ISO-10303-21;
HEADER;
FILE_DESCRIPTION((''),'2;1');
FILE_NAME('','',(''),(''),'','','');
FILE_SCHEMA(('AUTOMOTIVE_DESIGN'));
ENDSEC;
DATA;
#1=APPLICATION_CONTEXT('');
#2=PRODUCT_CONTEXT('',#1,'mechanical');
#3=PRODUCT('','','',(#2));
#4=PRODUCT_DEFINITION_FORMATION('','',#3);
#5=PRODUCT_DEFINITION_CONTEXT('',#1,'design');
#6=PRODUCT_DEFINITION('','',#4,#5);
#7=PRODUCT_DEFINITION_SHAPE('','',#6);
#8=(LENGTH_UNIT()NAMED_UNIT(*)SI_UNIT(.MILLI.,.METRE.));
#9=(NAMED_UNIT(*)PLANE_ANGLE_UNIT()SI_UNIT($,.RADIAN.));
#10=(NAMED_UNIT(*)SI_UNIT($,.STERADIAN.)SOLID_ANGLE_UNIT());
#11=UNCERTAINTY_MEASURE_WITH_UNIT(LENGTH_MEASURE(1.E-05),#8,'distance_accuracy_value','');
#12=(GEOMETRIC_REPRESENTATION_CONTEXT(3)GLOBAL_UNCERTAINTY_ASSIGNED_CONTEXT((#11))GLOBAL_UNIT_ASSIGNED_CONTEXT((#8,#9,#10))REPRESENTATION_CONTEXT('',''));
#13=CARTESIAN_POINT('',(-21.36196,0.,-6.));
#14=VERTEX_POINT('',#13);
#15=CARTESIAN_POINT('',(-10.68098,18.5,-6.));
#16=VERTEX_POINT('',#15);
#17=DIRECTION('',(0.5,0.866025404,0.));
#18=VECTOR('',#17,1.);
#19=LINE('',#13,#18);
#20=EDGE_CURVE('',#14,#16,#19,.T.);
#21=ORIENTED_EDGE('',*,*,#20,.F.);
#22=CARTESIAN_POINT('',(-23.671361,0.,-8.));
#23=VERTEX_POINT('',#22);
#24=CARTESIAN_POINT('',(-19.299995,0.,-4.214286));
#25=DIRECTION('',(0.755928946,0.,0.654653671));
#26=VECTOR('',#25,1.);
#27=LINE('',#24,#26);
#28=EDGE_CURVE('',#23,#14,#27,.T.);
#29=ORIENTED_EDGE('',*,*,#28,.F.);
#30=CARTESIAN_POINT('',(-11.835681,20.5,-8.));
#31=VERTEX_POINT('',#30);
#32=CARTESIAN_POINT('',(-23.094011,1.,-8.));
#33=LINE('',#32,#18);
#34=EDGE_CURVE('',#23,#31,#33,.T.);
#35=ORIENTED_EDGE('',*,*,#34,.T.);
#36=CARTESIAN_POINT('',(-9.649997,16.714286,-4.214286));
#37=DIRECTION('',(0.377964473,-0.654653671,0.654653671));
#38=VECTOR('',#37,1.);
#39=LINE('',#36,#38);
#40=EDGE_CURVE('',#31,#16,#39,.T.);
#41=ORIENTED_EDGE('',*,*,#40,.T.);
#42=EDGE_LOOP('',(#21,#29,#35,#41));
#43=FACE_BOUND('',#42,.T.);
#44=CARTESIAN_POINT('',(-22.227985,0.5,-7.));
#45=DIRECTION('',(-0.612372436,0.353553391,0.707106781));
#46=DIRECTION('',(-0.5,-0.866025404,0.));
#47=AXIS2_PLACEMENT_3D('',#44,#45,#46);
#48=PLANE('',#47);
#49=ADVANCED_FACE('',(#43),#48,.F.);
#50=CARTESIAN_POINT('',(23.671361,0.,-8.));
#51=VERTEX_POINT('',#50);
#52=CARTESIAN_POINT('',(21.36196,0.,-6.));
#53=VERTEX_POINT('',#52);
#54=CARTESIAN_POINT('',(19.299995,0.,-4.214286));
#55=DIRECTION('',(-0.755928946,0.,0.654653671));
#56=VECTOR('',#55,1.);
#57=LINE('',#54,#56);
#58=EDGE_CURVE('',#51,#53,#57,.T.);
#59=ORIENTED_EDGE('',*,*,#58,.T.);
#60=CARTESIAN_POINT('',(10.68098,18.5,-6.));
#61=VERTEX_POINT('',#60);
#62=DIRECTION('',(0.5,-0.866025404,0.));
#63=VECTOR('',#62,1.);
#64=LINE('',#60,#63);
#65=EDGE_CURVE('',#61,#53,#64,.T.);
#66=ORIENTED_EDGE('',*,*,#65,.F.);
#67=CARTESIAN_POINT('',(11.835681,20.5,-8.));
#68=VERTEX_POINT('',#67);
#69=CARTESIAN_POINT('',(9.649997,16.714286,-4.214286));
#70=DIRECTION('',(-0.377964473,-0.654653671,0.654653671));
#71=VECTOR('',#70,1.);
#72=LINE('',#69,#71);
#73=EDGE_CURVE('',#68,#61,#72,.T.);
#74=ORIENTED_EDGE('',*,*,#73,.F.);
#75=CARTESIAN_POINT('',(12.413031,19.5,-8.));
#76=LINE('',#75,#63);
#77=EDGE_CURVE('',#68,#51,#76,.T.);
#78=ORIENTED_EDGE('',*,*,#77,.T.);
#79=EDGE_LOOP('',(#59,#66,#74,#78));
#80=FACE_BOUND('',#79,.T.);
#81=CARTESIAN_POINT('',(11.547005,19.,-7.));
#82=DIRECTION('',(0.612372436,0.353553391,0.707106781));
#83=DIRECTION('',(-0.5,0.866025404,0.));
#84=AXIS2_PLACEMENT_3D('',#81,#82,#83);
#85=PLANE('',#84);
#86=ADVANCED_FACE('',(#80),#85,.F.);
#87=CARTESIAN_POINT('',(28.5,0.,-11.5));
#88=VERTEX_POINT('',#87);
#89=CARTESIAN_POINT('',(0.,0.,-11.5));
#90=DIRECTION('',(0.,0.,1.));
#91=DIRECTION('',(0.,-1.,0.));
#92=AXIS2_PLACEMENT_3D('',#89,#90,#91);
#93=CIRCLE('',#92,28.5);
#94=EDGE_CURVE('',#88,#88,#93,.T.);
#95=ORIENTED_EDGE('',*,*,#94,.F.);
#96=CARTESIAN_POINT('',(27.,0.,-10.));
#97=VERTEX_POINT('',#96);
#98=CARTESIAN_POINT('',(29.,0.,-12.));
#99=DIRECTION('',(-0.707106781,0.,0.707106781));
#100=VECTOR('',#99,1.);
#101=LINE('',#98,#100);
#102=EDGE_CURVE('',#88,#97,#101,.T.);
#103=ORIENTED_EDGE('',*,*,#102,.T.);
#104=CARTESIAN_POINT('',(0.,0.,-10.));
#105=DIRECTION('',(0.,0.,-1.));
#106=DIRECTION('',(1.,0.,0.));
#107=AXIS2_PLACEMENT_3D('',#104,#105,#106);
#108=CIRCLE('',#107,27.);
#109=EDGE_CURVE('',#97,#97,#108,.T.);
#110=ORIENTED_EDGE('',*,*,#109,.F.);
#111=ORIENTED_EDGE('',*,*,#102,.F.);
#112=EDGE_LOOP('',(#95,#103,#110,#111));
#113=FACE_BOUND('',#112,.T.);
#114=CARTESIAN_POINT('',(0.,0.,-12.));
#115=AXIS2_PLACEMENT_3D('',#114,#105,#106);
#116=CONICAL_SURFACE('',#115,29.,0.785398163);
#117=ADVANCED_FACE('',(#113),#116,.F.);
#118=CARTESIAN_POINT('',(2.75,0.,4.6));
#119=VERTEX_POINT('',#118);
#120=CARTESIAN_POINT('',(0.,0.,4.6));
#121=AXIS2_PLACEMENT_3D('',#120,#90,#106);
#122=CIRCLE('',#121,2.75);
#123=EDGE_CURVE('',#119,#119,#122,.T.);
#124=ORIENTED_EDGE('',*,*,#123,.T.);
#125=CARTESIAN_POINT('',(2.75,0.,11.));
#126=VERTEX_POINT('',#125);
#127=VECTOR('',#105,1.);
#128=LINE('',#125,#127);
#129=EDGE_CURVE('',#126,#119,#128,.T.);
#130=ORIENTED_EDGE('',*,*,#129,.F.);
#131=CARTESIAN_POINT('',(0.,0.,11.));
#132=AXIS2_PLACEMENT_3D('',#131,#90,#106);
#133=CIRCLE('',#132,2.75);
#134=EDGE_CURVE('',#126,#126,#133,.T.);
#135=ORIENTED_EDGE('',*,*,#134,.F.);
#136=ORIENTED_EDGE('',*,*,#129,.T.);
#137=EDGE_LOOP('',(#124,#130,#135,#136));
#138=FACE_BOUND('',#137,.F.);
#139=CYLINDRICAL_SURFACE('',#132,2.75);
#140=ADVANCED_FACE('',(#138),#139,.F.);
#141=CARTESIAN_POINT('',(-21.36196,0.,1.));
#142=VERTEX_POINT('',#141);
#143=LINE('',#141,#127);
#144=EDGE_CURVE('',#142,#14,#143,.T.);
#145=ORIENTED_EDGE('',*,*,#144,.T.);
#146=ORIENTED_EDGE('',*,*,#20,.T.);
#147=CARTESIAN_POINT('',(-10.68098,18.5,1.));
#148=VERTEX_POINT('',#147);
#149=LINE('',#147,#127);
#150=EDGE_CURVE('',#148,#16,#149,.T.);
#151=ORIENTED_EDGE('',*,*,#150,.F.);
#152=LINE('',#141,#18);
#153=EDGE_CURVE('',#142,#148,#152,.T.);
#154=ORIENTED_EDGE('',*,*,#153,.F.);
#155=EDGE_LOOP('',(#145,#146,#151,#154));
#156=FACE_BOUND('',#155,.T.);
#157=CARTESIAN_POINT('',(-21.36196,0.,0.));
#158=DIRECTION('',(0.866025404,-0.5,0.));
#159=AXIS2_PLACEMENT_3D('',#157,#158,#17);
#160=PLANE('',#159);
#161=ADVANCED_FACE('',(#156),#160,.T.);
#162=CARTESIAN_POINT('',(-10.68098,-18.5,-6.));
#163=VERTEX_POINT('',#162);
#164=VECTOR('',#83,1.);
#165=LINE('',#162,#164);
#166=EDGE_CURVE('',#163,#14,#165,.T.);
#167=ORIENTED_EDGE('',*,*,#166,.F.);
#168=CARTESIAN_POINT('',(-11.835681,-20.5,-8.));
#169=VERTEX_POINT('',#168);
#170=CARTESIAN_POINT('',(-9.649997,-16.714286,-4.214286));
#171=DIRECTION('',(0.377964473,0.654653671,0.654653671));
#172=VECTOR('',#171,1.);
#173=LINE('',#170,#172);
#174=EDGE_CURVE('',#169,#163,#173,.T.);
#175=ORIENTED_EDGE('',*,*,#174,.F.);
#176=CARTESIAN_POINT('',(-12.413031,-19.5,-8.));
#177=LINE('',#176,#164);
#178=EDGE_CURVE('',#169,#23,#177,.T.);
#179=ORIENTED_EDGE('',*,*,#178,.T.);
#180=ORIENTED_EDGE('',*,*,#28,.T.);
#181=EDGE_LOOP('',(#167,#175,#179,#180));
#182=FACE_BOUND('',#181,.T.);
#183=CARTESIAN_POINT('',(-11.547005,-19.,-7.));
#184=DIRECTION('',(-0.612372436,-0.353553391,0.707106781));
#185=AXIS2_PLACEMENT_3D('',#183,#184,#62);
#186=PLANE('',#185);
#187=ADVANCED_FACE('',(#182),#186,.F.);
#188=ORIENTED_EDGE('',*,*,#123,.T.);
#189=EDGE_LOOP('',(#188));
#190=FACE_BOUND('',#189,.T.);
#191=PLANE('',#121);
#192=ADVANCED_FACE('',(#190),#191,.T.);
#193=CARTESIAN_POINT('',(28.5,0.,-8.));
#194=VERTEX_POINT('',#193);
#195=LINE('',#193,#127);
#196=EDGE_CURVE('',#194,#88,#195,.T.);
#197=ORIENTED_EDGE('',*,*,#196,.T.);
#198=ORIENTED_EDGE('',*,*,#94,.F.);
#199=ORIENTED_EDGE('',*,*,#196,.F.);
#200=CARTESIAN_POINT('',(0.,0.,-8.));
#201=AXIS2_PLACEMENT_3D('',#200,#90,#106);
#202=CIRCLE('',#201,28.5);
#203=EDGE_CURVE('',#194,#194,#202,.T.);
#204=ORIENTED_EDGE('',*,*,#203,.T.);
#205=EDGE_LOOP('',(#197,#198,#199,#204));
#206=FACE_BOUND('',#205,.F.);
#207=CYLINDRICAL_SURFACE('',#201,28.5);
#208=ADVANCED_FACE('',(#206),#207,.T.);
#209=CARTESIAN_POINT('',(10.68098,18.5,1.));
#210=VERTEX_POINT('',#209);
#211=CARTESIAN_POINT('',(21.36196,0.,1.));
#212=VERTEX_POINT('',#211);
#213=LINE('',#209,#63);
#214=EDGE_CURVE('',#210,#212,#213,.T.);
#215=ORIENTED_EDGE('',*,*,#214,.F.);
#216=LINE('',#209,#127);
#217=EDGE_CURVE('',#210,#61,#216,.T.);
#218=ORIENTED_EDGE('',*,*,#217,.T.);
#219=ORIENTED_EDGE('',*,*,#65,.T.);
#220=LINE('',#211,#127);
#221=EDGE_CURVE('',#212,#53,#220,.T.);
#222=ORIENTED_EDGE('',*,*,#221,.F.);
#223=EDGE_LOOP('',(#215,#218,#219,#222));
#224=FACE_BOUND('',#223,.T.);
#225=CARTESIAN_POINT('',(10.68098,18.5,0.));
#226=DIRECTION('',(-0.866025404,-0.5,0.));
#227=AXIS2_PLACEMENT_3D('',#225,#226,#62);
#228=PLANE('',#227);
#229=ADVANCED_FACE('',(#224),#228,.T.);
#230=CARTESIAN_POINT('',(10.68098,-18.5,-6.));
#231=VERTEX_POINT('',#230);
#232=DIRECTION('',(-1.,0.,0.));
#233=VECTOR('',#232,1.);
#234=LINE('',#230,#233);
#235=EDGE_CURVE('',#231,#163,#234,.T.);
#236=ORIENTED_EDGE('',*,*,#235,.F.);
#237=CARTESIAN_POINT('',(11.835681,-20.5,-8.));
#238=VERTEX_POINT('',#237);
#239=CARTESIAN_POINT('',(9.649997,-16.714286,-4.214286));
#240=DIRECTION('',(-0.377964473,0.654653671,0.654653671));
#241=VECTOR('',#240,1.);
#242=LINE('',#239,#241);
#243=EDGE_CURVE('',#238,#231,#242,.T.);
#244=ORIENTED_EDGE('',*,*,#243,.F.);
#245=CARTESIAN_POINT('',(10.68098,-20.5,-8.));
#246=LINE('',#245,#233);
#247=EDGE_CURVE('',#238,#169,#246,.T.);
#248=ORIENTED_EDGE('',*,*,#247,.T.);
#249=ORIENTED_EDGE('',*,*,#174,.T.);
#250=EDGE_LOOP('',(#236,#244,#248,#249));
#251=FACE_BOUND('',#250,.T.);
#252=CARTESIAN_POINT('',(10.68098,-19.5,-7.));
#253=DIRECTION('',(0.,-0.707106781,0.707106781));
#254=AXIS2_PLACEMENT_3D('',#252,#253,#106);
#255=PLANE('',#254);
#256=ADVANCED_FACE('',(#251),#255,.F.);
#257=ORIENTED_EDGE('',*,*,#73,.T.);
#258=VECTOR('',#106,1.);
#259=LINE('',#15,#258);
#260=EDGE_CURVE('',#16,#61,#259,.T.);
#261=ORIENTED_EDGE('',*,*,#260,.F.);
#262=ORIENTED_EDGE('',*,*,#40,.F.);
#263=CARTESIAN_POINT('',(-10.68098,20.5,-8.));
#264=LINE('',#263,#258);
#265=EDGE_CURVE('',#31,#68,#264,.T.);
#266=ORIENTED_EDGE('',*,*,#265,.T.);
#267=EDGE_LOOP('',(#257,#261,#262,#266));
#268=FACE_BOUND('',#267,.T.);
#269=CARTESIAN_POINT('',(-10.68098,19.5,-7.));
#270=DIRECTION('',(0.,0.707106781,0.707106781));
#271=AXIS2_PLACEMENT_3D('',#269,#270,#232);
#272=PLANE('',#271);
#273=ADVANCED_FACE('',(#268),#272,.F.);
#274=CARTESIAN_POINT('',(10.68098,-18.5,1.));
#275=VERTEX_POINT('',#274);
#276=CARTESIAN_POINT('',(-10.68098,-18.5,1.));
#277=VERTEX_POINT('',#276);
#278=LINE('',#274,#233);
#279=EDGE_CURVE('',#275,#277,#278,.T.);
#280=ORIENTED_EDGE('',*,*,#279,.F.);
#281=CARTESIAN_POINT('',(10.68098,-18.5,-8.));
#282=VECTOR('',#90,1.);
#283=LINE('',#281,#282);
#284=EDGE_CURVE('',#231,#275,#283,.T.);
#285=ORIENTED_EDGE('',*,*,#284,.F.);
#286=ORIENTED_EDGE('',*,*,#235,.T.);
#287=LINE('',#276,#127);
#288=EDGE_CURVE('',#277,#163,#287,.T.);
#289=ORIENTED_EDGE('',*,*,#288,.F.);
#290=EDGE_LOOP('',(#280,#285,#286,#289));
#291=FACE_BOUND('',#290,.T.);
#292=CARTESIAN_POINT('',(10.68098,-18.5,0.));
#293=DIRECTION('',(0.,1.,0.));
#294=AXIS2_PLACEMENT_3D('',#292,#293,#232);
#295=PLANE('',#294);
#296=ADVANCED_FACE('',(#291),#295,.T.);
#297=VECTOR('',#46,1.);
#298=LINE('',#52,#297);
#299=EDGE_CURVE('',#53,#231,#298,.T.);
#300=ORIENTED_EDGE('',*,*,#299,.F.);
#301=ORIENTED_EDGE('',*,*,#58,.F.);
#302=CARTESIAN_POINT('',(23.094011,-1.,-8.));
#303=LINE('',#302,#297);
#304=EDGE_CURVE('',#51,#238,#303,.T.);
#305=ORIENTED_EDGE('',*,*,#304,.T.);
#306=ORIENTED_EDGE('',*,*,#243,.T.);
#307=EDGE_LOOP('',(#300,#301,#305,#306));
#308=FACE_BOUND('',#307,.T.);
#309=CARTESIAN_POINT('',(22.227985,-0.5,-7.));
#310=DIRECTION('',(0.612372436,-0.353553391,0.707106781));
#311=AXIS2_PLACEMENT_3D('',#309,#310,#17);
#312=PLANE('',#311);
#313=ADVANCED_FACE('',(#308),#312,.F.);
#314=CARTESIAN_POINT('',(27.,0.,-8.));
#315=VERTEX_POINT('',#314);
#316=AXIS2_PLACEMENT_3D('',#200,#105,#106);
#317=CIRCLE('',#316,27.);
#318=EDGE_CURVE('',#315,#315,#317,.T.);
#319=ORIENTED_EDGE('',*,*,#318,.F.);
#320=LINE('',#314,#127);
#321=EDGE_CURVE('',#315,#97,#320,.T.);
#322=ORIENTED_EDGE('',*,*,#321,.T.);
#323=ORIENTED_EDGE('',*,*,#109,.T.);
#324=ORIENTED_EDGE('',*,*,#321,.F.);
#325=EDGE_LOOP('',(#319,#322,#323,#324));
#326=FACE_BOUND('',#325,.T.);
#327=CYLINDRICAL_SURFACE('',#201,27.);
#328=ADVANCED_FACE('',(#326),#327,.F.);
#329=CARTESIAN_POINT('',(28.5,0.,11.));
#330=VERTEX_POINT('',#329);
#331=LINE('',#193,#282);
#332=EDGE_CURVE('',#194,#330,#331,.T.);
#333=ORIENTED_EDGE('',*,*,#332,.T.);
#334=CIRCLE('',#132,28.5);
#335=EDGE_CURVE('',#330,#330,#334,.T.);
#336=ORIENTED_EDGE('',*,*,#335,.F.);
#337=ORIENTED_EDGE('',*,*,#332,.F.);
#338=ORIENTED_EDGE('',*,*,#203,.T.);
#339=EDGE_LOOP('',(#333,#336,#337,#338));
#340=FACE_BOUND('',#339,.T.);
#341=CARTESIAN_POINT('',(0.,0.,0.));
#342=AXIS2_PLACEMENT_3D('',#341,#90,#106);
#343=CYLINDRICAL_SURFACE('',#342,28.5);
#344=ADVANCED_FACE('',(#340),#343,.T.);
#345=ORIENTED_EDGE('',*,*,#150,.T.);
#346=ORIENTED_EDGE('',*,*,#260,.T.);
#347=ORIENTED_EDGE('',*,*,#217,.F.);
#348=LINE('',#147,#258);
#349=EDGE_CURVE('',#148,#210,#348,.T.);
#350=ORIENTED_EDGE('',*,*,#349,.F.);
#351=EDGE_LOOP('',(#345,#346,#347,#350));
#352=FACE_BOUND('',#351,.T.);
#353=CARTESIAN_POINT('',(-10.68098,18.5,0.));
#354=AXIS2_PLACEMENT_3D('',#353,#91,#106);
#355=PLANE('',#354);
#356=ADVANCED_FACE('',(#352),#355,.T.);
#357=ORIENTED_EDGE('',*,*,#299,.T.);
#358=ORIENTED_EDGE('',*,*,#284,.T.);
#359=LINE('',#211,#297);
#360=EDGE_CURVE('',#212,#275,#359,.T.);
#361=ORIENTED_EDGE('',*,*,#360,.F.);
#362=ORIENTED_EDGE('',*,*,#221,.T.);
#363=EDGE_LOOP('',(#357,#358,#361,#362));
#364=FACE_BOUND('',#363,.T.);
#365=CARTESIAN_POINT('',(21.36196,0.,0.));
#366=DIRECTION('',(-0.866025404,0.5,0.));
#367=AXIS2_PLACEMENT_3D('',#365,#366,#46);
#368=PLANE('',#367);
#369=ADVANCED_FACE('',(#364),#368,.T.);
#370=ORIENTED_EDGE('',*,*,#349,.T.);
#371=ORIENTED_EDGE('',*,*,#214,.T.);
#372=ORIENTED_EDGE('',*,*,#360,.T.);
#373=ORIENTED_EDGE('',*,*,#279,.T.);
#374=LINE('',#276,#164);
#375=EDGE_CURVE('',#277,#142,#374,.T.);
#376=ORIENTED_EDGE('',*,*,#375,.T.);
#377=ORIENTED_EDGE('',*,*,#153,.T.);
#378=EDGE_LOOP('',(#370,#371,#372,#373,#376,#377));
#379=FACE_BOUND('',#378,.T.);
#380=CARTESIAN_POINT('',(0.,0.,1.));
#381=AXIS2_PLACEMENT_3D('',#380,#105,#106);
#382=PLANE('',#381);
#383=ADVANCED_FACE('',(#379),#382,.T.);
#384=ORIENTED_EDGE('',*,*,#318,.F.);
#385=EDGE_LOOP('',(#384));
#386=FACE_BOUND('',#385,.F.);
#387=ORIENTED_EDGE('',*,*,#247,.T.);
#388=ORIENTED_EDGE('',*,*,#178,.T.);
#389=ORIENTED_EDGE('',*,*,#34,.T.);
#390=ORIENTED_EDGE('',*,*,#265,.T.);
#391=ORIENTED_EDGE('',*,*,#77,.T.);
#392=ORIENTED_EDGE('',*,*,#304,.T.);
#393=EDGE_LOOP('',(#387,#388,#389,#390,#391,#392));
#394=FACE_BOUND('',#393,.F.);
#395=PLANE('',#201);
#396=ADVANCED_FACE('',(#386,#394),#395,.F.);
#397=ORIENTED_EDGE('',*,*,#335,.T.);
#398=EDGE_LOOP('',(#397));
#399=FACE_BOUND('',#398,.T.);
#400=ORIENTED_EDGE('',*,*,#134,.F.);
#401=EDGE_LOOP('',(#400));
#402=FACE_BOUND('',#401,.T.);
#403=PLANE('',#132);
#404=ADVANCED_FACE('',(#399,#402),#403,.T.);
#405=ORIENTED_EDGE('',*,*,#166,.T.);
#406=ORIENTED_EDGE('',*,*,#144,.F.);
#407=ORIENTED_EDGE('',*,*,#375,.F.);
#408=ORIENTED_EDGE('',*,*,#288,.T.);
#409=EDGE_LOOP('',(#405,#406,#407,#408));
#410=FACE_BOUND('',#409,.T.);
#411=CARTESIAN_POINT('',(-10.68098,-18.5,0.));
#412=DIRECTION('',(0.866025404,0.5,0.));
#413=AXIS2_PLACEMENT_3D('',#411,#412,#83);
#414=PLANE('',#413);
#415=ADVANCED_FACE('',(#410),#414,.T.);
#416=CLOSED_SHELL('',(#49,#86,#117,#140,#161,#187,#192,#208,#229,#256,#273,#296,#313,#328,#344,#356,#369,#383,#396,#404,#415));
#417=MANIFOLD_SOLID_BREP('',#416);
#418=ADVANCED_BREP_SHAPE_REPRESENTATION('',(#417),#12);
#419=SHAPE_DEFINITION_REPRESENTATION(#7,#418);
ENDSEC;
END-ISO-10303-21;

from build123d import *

# Parameters (mm, degrees)
F0_R     = 28.5
F1_DEPTH = 11
F3_DEPTH = 1
F4_R     = 2.75
F5_DEPTH = 6.4
F6_DEPTH = 8
F7_R     = 28.5
F7_R_2   = 27
F8_DEPTH = 4
F10_SIZE = 2


# Not quite as in the source:
# - a fillet or chamfer that OpenCascade refuses, or shapes differently, is made with other operations: its cross-section is extruded or revolved along the edge and cut away or added


with BuildPart() as f1:
    # F0 (on Top) → F1 (new body)
    with BuildSketch(Plane.XY):
        Circle(F0_R)
    extrude(amount=F1_DEPTH)

    # F2 (on face) → F3 (cut)
    with BuildSketch(Plane(origin=(0, 0, 0), x_dir=(1, 0, 0), z_dir=(0, 0, -1))):
        Polygon((10.68097998, 18.5), (-10.68097998, 18.5), (-21.36195996, 0), (-10.68097998, -18.5), (10.68097998, -18.5), (21.36195996, 0), align=None)
    extrude(amount=-F3_DEPTH, mode=Mode.SUBTRACT)

    # F4 (on face) → F5 (cut)
    with BuildSketch(Plane.XY.offset(11)):
        Circle(F4_R)
    extrude(amount=-F5_DEPTH, mode=Mode.SUBTRACT)

    # F6 (add): a face of the model
    f6_faces = [f1.faces().sort_by_distance(p)[0] for p in [
        (-27.6938982694, 0, 0),
    ]]
    extrude(f6_faces, amount=F6_DEPTH)

    # F7 (on face) → F8 (join)
    with BuildSketch(Plane(origin=(0, 0, -8), x_dir=(1, 0, 0), z_dir=(0, 0, -1))):
        Circle(F7_R)
        Circle(F7_R_2, mode=Mode.SUBTRACT)
    extrude(amount=F8_DEPTH)

    # F9: chamfer of 2 on 1 edges, made by hand

    # F9_s1 → F9_t2 (revolve, cut)
    with BuildSketch(Plane.XZ):
        Polygon((29, -12), (27, -10), (27, -12), align=None)
    revolve(axis=Axis((0, 0, -12), (0, 0, -1)), mode=Mode.SUBTRACT)

    # F10
    f10_edges = [f1.edges().sort_by_distance(p)[0] for p in [
        (0, -18.5, -8),
        (16.02147, -9.25, -8),
        (16.02147, 9.25, -8),
        (0, 18.5, -8),
        (-16.02147, 9.25, -8),
        (-16.02147, -9.25, -8),
    ]]
    chamfer(f10_edges, length=F10_SIZE)


solid = f1.part
